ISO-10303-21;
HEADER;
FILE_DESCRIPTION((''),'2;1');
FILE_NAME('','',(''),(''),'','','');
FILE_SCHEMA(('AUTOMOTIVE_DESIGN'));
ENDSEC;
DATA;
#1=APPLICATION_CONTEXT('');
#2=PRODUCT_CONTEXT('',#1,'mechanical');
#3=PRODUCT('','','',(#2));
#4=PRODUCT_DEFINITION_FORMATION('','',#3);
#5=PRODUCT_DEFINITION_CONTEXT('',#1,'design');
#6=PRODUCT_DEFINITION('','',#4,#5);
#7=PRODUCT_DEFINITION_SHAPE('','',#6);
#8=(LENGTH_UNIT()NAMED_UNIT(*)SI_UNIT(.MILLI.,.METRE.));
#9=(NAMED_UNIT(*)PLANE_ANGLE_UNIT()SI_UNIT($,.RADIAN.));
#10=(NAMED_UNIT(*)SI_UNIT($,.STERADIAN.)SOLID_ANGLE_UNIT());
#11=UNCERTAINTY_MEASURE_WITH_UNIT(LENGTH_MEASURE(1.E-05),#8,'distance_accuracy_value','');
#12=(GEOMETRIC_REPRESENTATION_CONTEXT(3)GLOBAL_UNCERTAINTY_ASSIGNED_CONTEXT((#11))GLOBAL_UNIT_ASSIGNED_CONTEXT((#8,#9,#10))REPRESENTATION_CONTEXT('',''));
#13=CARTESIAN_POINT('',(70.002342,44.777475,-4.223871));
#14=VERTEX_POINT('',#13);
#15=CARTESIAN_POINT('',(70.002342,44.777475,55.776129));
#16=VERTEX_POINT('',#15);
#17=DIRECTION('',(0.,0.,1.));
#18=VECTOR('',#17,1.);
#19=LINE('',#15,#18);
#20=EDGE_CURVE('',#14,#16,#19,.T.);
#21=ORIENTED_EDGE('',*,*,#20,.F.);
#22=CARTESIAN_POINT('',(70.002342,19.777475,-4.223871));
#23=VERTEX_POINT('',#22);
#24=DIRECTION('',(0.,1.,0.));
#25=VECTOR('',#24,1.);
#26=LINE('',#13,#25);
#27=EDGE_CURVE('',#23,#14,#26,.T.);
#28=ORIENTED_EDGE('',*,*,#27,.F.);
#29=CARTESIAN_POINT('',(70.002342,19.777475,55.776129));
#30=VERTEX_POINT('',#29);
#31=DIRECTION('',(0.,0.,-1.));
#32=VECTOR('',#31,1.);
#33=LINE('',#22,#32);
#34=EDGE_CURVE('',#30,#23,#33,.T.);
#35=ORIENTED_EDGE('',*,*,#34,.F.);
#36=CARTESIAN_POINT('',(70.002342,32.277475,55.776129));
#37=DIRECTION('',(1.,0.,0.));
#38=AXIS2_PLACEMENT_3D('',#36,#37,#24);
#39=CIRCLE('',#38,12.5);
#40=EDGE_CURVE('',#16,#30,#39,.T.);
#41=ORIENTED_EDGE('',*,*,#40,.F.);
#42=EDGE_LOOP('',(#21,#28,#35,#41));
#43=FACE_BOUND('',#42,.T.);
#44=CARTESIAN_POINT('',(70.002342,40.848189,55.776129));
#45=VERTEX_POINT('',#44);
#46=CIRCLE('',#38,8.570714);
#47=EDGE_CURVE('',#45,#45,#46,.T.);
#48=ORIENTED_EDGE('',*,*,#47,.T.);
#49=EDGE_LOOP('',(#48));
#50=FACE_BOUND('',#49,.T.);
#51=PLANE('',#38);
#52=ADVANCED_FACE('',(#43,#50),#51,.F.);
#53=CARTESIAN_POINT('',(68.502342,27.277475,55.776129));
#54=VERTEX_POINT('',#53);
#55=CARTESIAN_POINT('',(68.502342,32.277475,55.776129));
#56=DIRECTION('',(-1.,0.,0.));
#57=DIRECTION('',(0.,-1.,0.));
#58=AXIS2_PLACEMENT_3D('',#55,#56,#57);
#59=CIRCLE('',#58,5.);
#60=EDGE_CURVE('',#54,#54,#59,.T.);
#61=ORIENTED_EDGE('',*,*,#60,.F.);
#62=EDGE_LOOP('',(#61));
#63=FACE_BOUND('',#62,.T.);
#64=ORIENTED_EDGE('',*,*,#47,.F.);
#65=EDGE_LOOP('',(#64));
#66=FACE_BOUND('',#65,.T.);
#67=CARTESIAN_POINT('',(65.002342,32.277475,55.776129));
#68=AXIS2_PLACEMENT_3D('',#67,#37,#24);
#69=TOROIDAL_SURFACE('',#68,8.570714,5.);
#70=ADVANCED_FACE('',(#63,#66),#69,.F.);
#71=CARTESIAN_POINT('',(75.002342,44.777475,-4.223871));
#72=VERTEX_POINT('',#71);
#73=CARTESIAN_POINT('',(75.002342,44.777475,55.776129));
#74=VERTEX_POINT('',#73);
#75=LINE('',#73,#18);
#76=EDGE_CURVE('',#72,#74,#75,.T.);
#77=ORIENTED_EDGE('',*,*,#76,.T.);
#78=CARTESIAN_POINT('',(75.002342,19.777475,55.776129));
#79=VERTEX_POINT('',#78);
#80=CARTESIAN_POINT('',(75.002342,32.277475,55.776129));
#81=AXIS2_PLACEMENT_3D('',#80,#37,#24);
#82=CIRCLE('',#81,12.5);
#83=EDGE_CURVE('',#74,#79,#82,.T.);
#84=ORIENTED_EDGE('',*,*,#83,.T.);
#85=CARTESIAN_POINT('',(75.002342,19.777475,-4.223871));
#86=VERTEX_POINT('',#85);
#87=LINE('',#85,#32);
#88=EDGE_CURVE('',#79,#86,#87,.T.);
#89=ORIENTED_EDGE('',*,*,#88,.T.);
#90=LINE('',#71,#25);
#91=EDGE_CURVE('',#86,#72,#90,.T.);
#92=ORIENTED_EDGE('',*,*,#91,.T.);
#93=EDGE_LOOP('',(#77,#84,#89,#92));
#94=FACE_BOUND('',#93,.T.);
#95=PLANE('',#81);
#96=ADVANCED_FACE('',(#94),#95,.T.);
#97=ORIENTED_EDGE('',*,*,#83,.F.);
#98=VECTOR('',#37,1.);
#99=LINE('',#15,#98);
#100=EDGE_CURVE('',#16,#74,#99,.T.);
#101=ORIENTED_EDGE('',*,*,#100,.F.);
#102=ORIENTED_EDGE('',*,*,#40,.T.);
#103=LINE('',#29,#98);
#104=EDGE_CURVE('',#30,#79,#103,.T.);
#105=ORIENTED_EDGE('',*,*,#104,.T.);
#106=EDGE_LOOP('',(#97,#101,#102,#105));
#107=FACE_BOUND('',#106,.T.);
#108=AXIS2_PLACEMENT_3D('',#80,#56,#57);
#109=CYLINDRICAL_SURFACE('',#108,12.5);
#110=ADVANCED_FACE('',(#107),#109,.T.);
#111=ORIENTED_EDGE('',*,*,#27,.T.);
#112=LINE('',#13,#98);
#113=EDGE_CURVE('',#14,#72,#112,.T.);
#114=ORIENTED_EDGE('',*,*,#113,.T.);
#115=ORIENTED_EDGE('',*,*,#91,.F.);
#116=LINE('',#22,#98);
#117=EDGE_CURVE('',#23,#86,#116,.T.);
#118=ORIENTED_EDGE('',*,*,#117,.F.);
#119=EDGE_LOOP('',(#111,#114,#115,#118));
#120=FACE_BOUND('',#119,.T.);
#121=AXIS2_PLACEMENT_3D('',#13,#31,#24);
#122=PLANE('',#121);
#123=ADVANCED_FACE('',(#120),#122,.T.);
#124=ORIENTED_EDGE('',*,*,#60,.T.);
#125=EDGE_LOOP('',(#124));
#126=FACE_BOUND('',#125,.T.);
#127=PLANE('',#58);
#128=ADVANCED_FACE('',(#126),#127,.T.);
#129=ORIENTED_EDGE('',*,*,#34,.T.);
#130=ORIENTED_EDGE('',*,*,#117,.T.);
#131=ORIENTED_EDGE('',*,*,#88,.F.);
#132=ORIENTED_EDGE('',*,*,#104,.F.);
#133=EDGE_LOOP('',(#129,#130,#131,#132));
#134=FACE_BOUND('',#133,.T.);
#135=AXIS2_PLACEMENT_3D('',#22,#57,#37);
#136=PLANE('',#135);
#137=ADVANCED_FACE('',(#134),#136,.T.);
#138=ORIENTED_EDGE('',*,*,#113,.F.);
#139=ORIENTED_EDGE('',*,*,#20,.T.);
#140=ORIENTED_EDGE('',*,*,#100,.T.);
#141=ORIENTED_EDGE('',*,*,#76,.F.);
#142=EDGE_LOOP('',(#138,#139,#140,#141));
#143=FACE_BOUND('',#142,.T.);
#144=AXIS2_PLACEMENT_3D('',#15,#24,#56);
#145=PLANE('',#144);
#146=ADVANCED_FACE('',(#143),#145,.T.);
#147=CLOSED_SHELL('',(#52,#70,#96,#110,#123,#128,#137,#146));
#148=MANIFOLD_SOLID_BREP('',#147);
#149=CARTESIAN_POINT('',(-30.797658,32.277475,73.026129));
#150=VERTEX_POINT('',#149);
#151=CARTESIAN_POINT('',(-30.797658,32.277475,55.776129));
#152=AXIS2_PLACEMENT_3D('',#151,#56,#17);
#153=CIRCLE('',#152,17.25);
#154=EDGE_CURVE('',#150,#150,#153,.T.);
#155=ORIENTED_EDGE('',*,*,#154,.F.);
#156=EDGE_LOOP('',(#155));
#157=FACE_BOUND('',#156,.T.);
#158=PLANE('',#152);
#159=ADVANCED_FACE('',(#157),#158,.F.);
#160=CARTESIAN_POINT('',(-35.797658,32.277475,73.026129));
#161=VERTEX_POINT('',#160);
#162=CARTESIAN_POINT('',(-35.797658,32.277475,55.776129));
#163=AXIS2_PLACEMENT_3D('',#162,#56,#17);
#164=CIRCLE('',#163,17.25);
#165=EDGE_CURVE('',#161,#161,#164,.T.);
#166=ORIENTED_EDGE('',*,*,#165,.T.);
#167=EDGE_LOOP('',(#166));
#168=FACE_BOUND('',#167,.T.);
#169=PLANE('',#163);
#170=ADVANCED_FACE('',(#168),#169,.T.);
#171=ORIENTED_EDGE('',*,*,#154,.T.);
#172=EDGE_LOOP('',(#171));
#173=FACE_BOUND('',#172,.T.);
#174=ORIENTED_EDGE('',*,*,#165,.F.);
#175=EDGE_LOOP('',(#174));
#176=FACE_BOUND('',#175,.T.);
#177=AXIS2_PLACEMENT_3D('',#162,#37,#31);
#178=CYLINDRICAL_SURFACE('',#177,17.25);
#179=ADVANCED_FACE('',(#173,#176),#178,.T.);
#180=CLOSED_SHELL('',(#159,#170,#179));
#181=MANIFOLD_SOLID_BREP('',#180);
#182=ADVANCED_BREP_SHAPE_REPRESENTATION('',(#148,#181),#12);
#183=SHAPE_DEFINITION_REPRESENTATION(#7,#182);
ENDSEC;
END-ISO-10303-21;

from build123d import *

# Parameters (mm, degrees)
SKETCH1_R                                    = 17.25
MOTOR_PLATE_DEPTH                            = 5
SKETCH2_R                                    = 12.5
BEARING_SIDE_DEPTH                           = 5
SKETCH3_R                                    = 5
BEARING_NUB_ONLY_CONTACTS_INNER_HUB_OF_DEPTH = 1.5
BEARING_NUB_FILLET_5MM_R                     = 5
BOSS_EXTRUDE4_DEPTH                          = 5


with BuildPart() as part:
    # Sketch1 → Motor plate (new body)
    with BuildSketch(Plane.ZY.offset(30.797658267)):
        with Locations((55.776129099, 32.277474859)):
            Circle(SKETCH1_R)
    extrude(amount=MOTOR_PLATE_DEPTH)


with BuildPart() as body_2:
    # Sketch2 → Bearing side (new body)
    with BuildSketch(Plane(origin=(70.002341733, 0, 0), x_dir=(0, 0, -1), z_dir=(1, 0, 0))):
        with Locations(Location((-55.776129099, 32.277474859, 0), (0, 0, 90))):
            Circle(SKETCH2_R)
    extrude(amount=BEARING_SIDE_DEPTH)

    # Sketch3 → Bearing nub (only contacts inner hub of bearing) (add)
    with BuildSketch(Plane.ZY.offset(-70.002341733)):
        with Locations(Location((55.776129099, 32.277474859, 0), (0, 0, 270))):
            Circle(SKETCH3_R)
    extrude(amount=BEARING_NUB_ONLY_CONTACTS_INNER_HUB_OF_DEPTH)

    # Bearing nub fillet 5mm
    # the kernel refuses this fillet: 5 mm, written as the material it adds along each edge
    with BuildSketch(Plane(origin=(70.002341733, 32.277474859, 55.776129099), x_dir=(0, -1, 0), z_dir=(0, 0, -1))) as bearing_nub_fillet_5mm_piece_1:
        with BuildLine():
            CenterArc((8.570714214, 5), BEARING_NUB_FILLET_5MM_R, 224.427004001, 45.572995999)
            Line((5, 1.5), (4.928585716, 1.43))
            ThreePointArc((4.928585716, 1.43), (4.9, 0.75), (4.9, 0))
            Line((4.9, 0), (5, -0.1))
            Line((5, -0.1), (8.570714214, -0.1))
            Line((8.570714214, -0.1), (8.570714214, 0))
        make_face()
    revolve(axis=Axis((70.002341733, 32.277474859, 55.776129099), (-1, 0, 0)))

    # Sketch4 → Boss-Extrude4 (add)
    with BuildSketch(Plane(origin=(75.002341733, 0, 0), x_dir=(0, 0, -1), z_dir=(1, 0, 0))):
        with BuildLine():
            Line((-55.776129099, 44.777474859), (4.223870901, 44.777474859))
            Line((4.223870901, 44.777474859), (4.223870901, 19.777474859))
            Line((4.223870901, 19.777474859), (-55.776129099, 19.777474859))
            ThreePointArc((-55.776129099, 19.777474859), (-68.276129099, 32.277474859), (-55.776129099, 44.777474859))
        make_face()
    extrude(amount=-BOSS_EXTRUDE4_DEPTH)


solid = Compound([part.part, body_2.part])
